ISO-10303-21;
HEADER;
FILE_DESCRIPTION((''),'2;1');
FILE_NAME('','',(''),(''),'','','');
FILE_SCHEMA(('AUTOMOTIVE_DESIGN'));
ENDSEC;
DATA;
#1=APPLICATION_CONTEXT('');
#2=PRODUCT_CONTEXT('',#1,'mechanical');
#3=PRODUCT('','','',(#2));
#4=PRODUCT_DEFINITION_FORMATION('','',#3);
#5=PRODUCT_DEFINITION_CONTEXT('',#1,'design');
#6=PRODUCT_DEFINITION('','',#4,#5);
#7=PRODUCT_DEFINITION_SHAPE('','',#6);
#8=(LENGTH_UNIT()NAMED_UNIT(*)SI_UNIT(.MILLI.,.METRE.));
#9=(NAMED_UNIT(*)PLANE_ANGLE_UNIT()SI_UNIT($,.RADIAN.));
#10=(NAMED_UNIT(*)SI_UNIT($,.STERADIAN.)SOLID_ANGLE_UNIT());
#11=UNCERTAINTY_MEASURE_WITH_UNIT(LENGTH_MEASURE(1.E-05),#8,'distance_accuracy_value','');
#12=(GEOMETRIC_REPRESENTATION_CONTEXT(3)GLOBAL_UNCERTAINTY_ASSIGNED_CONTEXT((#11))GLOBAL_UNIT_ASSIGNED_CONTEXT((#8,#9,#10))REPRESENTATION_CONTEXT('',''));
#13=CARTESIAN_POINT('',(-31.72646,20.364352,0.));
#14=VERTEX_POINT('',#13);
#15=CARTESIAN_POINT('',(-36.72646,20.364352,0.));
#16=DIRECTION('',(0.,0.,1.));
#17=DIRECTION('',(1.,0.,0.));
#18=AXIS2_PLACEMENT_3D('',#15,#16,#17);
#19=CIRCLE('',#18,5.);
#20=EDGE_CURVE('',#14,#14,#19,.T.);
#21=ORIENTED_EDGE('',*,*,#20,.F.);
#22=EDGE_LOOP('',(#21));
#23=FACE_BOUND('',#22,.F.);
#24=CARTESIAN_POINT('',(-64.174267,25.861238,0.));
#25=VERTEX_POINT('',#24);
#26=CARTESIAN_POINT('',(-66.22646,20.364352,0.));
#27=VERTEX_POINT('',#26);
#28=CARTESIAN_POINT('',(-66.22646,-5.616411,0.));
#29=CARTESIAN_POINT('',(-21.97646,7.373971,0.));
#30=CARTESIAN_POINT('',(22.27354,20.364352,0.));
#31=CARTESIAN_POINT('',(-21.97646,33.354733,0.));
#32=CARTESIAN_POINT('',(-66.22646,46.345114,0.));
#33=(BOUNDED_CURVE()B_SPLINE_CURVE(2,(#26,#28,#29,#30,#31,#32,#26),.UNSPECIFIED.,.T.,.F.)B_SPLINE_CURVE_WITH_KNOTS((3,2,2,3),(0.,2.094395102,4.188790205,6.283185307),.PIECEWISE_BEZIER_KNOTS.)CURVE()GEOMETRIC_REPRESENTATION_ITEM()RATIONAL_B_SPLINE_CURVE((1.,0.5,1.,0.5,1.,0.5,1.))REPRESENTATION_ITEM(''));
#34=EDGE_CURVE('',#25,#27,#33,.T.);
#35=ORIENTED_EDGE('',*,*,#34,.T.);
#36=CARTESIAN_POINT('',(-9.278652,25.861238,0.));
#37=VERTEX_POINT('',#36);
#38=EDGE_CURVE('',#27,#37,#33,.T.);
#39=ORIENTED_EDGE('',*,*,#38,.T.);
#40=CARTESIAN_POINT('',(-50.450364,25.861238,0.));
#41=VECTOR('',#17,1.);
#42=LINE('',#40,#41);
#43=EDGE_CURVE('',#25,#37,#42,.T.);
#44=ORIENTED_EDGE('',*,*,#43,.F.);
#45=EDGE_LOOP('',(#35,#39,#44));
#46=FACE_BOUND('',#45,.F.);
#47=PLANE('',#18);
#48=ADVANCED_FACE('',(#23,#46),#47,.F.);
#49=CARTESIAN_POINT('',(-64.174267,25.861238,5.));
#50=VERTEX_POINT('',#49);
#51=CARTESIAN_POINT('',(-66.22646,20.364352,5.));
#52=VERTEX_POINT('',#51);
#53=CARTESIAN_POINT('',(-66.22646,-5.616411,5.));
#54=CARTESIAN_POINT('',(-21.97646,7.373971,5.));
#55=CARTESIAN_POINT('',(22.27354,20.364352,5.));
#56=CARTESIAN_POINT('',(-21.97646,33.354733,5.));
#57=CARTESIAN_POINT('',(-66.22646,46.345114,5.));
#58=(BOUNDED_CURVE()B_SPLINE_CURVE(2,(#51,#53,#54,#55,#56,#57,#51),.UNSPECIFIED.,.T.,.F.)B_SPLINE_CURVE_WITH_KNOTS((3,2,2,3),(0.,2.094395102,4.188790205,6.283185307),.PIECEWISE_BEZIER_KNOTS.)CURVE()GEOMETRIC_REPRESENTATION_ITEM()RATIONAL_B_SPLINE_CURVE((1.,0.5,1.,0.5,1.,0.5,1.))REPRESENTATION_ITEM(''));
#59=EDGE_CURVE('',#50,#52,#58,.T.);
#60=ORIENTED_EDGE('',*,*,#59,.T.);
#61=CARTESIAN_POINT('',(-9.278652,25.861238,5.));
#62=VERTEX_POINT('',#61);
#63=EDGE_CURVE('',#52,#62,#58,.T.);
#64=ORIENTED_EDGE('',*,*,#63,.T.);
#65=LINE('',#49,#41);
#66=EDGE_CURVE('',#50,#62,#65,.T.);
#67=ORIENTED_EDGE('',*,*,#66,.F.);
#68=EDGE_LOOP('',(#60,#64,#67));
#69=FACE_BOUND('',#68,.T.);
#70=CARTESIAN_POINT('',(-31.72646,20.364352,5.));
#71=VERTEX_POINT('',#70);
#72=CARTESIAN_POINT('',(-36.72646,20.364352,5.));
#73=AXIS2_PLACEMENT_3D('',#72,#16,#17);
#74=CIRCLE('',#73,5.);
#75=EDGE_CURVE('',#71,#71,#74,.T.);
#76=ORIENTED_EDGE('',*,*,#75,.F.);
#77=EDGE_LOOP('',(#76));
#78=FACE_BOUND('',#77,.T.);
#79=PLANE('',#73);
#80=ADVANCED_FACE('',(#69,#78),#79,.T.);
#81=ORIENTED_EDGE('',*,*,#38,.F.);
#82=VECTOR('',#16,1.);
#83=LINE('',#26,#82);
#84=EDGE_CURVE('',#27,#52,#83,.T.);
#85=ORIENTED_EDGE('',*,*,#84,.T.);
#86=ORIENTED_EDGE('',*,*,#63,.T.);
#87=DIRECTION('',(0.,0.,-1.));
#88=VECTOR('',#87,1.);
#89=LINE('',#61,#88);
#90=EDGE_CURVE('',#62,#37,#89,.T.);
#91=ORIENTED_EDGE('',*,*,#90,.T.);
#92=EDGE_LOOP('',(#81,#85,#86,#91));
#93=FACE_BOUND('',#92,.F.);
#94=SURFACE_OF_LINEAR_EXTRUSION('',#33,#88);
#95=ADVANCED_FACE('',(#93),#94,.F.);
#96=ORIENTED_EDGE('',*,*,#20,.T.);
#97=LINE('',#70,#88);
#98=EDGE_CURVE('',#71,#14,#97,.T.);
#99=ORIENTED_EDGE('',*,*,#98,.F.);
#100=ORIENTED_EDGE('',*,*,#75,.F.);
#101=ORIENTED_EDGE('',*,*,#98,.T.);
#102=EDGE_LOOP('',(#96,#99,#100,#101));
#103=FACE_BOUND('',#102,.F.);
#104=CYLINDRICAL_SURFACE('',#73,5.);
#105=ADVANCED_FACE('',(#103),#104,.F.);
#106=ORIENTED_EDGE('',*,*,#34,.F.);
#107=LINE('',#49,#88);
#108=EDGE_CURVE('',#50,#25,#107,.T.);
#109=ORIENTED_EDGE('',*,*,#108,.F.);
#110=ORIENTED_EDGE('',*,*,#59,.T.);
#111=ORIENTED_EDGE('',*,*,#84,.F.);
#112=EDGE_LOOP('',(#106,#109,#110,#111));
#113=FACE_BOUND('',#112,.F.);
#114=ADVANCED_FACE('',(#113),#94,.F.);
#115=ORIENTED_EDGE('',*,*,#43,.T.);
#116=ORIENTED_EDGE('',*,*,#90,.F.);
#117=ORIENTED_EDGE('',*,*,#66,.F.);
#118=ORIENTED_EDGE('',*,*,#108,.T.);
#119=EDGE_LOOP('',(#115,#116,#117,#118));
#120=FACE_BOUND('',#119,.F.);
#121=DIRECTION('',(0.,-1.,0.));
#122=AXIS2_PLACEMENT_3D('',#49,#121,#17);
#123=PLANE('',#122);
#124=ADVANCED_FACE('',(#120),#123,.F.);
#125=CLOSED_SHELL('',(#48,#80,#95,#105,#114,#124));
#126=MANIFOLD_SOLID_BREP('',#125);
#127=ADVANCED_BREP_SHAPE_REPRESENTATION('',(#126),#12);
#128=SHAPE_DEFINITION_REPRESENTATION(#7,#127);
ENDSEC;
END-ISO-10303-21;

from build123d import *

# Parameters (mm, degrees)
F1_DEPTH = 5
F2_R     = 5
F3_DEPTH = 25
F5_DEPTH = 25


# Not quite as in the source:
# - a feature names something its author has since deleted; it is built from what else it names


with BuildPart() as f1:
    # F0 (on Top) → F1 (new body)
    with BuildSketch(Plane.XY):
        with BuildLine():
            add(Edge.make_bspline(
                [(-66.2264598608, 20.3643515706), (-66.2264598608, -5.6164105429), (-21.9764598608, 7.3739705138), (22.2735401392, 20.3643515706), (-21.9764598608, 33.3547326274), (-66.2264598608, 46.3451136841), (-66.2264598608, 20.3643515706)],
                knots=[0, 0, 0, 2.0943951024, 2.0943951024, 4.1887902048, 4.1887902048, 6.2831853072, 6.2831853072, 6.2831853072], degree=2, weights=[1, 0.5, 1, 0.5, 1, 0.5, 1]))
        make_face()
    extrude(amount=F1_DEPTH)

    # F2 (on face) → F3 (cut)
    with BuildSketch(Plane.XY.offset(5)):
        with Locations((-36.7264598608, 20.3643515706)):
            Circle(F2_R)
    extrude(amount=-F3_DEPTH, mode=Mode.SUBTRACT)

    # F4 (on face) → F5 (cut)
    with BuildSketch(Plane.XY.offset(5)):
        with BuildLine():
            add(Edge.make_bspline(
                [(-9.2786523325, 25.8612383577), (-13.0541377648, 30.7354249678), (-21.9764598608, 33.3547326274), (-51.6274393448, 42.0593094003), (-64.1742673891, 25.8612383577)],
                knots=[3.4859107004, 3.4859107004, 3.4859107004, 4.1887902048, 4.1887902048, 5.8694408983, 5.8694408983, 5.8694408983], degree=2, weights=[0.7770272803, 0.8321998787, 1, 0.5987742018, 0.8414769682]))
            Line((-64.1742673891, 25.8612383577), (-9.2786523325, 25.8612383577))
        make_face()
    extrude(amount=-F5_DEPTH, mode=Mode.SUBTRACT)


solid = f1.part
